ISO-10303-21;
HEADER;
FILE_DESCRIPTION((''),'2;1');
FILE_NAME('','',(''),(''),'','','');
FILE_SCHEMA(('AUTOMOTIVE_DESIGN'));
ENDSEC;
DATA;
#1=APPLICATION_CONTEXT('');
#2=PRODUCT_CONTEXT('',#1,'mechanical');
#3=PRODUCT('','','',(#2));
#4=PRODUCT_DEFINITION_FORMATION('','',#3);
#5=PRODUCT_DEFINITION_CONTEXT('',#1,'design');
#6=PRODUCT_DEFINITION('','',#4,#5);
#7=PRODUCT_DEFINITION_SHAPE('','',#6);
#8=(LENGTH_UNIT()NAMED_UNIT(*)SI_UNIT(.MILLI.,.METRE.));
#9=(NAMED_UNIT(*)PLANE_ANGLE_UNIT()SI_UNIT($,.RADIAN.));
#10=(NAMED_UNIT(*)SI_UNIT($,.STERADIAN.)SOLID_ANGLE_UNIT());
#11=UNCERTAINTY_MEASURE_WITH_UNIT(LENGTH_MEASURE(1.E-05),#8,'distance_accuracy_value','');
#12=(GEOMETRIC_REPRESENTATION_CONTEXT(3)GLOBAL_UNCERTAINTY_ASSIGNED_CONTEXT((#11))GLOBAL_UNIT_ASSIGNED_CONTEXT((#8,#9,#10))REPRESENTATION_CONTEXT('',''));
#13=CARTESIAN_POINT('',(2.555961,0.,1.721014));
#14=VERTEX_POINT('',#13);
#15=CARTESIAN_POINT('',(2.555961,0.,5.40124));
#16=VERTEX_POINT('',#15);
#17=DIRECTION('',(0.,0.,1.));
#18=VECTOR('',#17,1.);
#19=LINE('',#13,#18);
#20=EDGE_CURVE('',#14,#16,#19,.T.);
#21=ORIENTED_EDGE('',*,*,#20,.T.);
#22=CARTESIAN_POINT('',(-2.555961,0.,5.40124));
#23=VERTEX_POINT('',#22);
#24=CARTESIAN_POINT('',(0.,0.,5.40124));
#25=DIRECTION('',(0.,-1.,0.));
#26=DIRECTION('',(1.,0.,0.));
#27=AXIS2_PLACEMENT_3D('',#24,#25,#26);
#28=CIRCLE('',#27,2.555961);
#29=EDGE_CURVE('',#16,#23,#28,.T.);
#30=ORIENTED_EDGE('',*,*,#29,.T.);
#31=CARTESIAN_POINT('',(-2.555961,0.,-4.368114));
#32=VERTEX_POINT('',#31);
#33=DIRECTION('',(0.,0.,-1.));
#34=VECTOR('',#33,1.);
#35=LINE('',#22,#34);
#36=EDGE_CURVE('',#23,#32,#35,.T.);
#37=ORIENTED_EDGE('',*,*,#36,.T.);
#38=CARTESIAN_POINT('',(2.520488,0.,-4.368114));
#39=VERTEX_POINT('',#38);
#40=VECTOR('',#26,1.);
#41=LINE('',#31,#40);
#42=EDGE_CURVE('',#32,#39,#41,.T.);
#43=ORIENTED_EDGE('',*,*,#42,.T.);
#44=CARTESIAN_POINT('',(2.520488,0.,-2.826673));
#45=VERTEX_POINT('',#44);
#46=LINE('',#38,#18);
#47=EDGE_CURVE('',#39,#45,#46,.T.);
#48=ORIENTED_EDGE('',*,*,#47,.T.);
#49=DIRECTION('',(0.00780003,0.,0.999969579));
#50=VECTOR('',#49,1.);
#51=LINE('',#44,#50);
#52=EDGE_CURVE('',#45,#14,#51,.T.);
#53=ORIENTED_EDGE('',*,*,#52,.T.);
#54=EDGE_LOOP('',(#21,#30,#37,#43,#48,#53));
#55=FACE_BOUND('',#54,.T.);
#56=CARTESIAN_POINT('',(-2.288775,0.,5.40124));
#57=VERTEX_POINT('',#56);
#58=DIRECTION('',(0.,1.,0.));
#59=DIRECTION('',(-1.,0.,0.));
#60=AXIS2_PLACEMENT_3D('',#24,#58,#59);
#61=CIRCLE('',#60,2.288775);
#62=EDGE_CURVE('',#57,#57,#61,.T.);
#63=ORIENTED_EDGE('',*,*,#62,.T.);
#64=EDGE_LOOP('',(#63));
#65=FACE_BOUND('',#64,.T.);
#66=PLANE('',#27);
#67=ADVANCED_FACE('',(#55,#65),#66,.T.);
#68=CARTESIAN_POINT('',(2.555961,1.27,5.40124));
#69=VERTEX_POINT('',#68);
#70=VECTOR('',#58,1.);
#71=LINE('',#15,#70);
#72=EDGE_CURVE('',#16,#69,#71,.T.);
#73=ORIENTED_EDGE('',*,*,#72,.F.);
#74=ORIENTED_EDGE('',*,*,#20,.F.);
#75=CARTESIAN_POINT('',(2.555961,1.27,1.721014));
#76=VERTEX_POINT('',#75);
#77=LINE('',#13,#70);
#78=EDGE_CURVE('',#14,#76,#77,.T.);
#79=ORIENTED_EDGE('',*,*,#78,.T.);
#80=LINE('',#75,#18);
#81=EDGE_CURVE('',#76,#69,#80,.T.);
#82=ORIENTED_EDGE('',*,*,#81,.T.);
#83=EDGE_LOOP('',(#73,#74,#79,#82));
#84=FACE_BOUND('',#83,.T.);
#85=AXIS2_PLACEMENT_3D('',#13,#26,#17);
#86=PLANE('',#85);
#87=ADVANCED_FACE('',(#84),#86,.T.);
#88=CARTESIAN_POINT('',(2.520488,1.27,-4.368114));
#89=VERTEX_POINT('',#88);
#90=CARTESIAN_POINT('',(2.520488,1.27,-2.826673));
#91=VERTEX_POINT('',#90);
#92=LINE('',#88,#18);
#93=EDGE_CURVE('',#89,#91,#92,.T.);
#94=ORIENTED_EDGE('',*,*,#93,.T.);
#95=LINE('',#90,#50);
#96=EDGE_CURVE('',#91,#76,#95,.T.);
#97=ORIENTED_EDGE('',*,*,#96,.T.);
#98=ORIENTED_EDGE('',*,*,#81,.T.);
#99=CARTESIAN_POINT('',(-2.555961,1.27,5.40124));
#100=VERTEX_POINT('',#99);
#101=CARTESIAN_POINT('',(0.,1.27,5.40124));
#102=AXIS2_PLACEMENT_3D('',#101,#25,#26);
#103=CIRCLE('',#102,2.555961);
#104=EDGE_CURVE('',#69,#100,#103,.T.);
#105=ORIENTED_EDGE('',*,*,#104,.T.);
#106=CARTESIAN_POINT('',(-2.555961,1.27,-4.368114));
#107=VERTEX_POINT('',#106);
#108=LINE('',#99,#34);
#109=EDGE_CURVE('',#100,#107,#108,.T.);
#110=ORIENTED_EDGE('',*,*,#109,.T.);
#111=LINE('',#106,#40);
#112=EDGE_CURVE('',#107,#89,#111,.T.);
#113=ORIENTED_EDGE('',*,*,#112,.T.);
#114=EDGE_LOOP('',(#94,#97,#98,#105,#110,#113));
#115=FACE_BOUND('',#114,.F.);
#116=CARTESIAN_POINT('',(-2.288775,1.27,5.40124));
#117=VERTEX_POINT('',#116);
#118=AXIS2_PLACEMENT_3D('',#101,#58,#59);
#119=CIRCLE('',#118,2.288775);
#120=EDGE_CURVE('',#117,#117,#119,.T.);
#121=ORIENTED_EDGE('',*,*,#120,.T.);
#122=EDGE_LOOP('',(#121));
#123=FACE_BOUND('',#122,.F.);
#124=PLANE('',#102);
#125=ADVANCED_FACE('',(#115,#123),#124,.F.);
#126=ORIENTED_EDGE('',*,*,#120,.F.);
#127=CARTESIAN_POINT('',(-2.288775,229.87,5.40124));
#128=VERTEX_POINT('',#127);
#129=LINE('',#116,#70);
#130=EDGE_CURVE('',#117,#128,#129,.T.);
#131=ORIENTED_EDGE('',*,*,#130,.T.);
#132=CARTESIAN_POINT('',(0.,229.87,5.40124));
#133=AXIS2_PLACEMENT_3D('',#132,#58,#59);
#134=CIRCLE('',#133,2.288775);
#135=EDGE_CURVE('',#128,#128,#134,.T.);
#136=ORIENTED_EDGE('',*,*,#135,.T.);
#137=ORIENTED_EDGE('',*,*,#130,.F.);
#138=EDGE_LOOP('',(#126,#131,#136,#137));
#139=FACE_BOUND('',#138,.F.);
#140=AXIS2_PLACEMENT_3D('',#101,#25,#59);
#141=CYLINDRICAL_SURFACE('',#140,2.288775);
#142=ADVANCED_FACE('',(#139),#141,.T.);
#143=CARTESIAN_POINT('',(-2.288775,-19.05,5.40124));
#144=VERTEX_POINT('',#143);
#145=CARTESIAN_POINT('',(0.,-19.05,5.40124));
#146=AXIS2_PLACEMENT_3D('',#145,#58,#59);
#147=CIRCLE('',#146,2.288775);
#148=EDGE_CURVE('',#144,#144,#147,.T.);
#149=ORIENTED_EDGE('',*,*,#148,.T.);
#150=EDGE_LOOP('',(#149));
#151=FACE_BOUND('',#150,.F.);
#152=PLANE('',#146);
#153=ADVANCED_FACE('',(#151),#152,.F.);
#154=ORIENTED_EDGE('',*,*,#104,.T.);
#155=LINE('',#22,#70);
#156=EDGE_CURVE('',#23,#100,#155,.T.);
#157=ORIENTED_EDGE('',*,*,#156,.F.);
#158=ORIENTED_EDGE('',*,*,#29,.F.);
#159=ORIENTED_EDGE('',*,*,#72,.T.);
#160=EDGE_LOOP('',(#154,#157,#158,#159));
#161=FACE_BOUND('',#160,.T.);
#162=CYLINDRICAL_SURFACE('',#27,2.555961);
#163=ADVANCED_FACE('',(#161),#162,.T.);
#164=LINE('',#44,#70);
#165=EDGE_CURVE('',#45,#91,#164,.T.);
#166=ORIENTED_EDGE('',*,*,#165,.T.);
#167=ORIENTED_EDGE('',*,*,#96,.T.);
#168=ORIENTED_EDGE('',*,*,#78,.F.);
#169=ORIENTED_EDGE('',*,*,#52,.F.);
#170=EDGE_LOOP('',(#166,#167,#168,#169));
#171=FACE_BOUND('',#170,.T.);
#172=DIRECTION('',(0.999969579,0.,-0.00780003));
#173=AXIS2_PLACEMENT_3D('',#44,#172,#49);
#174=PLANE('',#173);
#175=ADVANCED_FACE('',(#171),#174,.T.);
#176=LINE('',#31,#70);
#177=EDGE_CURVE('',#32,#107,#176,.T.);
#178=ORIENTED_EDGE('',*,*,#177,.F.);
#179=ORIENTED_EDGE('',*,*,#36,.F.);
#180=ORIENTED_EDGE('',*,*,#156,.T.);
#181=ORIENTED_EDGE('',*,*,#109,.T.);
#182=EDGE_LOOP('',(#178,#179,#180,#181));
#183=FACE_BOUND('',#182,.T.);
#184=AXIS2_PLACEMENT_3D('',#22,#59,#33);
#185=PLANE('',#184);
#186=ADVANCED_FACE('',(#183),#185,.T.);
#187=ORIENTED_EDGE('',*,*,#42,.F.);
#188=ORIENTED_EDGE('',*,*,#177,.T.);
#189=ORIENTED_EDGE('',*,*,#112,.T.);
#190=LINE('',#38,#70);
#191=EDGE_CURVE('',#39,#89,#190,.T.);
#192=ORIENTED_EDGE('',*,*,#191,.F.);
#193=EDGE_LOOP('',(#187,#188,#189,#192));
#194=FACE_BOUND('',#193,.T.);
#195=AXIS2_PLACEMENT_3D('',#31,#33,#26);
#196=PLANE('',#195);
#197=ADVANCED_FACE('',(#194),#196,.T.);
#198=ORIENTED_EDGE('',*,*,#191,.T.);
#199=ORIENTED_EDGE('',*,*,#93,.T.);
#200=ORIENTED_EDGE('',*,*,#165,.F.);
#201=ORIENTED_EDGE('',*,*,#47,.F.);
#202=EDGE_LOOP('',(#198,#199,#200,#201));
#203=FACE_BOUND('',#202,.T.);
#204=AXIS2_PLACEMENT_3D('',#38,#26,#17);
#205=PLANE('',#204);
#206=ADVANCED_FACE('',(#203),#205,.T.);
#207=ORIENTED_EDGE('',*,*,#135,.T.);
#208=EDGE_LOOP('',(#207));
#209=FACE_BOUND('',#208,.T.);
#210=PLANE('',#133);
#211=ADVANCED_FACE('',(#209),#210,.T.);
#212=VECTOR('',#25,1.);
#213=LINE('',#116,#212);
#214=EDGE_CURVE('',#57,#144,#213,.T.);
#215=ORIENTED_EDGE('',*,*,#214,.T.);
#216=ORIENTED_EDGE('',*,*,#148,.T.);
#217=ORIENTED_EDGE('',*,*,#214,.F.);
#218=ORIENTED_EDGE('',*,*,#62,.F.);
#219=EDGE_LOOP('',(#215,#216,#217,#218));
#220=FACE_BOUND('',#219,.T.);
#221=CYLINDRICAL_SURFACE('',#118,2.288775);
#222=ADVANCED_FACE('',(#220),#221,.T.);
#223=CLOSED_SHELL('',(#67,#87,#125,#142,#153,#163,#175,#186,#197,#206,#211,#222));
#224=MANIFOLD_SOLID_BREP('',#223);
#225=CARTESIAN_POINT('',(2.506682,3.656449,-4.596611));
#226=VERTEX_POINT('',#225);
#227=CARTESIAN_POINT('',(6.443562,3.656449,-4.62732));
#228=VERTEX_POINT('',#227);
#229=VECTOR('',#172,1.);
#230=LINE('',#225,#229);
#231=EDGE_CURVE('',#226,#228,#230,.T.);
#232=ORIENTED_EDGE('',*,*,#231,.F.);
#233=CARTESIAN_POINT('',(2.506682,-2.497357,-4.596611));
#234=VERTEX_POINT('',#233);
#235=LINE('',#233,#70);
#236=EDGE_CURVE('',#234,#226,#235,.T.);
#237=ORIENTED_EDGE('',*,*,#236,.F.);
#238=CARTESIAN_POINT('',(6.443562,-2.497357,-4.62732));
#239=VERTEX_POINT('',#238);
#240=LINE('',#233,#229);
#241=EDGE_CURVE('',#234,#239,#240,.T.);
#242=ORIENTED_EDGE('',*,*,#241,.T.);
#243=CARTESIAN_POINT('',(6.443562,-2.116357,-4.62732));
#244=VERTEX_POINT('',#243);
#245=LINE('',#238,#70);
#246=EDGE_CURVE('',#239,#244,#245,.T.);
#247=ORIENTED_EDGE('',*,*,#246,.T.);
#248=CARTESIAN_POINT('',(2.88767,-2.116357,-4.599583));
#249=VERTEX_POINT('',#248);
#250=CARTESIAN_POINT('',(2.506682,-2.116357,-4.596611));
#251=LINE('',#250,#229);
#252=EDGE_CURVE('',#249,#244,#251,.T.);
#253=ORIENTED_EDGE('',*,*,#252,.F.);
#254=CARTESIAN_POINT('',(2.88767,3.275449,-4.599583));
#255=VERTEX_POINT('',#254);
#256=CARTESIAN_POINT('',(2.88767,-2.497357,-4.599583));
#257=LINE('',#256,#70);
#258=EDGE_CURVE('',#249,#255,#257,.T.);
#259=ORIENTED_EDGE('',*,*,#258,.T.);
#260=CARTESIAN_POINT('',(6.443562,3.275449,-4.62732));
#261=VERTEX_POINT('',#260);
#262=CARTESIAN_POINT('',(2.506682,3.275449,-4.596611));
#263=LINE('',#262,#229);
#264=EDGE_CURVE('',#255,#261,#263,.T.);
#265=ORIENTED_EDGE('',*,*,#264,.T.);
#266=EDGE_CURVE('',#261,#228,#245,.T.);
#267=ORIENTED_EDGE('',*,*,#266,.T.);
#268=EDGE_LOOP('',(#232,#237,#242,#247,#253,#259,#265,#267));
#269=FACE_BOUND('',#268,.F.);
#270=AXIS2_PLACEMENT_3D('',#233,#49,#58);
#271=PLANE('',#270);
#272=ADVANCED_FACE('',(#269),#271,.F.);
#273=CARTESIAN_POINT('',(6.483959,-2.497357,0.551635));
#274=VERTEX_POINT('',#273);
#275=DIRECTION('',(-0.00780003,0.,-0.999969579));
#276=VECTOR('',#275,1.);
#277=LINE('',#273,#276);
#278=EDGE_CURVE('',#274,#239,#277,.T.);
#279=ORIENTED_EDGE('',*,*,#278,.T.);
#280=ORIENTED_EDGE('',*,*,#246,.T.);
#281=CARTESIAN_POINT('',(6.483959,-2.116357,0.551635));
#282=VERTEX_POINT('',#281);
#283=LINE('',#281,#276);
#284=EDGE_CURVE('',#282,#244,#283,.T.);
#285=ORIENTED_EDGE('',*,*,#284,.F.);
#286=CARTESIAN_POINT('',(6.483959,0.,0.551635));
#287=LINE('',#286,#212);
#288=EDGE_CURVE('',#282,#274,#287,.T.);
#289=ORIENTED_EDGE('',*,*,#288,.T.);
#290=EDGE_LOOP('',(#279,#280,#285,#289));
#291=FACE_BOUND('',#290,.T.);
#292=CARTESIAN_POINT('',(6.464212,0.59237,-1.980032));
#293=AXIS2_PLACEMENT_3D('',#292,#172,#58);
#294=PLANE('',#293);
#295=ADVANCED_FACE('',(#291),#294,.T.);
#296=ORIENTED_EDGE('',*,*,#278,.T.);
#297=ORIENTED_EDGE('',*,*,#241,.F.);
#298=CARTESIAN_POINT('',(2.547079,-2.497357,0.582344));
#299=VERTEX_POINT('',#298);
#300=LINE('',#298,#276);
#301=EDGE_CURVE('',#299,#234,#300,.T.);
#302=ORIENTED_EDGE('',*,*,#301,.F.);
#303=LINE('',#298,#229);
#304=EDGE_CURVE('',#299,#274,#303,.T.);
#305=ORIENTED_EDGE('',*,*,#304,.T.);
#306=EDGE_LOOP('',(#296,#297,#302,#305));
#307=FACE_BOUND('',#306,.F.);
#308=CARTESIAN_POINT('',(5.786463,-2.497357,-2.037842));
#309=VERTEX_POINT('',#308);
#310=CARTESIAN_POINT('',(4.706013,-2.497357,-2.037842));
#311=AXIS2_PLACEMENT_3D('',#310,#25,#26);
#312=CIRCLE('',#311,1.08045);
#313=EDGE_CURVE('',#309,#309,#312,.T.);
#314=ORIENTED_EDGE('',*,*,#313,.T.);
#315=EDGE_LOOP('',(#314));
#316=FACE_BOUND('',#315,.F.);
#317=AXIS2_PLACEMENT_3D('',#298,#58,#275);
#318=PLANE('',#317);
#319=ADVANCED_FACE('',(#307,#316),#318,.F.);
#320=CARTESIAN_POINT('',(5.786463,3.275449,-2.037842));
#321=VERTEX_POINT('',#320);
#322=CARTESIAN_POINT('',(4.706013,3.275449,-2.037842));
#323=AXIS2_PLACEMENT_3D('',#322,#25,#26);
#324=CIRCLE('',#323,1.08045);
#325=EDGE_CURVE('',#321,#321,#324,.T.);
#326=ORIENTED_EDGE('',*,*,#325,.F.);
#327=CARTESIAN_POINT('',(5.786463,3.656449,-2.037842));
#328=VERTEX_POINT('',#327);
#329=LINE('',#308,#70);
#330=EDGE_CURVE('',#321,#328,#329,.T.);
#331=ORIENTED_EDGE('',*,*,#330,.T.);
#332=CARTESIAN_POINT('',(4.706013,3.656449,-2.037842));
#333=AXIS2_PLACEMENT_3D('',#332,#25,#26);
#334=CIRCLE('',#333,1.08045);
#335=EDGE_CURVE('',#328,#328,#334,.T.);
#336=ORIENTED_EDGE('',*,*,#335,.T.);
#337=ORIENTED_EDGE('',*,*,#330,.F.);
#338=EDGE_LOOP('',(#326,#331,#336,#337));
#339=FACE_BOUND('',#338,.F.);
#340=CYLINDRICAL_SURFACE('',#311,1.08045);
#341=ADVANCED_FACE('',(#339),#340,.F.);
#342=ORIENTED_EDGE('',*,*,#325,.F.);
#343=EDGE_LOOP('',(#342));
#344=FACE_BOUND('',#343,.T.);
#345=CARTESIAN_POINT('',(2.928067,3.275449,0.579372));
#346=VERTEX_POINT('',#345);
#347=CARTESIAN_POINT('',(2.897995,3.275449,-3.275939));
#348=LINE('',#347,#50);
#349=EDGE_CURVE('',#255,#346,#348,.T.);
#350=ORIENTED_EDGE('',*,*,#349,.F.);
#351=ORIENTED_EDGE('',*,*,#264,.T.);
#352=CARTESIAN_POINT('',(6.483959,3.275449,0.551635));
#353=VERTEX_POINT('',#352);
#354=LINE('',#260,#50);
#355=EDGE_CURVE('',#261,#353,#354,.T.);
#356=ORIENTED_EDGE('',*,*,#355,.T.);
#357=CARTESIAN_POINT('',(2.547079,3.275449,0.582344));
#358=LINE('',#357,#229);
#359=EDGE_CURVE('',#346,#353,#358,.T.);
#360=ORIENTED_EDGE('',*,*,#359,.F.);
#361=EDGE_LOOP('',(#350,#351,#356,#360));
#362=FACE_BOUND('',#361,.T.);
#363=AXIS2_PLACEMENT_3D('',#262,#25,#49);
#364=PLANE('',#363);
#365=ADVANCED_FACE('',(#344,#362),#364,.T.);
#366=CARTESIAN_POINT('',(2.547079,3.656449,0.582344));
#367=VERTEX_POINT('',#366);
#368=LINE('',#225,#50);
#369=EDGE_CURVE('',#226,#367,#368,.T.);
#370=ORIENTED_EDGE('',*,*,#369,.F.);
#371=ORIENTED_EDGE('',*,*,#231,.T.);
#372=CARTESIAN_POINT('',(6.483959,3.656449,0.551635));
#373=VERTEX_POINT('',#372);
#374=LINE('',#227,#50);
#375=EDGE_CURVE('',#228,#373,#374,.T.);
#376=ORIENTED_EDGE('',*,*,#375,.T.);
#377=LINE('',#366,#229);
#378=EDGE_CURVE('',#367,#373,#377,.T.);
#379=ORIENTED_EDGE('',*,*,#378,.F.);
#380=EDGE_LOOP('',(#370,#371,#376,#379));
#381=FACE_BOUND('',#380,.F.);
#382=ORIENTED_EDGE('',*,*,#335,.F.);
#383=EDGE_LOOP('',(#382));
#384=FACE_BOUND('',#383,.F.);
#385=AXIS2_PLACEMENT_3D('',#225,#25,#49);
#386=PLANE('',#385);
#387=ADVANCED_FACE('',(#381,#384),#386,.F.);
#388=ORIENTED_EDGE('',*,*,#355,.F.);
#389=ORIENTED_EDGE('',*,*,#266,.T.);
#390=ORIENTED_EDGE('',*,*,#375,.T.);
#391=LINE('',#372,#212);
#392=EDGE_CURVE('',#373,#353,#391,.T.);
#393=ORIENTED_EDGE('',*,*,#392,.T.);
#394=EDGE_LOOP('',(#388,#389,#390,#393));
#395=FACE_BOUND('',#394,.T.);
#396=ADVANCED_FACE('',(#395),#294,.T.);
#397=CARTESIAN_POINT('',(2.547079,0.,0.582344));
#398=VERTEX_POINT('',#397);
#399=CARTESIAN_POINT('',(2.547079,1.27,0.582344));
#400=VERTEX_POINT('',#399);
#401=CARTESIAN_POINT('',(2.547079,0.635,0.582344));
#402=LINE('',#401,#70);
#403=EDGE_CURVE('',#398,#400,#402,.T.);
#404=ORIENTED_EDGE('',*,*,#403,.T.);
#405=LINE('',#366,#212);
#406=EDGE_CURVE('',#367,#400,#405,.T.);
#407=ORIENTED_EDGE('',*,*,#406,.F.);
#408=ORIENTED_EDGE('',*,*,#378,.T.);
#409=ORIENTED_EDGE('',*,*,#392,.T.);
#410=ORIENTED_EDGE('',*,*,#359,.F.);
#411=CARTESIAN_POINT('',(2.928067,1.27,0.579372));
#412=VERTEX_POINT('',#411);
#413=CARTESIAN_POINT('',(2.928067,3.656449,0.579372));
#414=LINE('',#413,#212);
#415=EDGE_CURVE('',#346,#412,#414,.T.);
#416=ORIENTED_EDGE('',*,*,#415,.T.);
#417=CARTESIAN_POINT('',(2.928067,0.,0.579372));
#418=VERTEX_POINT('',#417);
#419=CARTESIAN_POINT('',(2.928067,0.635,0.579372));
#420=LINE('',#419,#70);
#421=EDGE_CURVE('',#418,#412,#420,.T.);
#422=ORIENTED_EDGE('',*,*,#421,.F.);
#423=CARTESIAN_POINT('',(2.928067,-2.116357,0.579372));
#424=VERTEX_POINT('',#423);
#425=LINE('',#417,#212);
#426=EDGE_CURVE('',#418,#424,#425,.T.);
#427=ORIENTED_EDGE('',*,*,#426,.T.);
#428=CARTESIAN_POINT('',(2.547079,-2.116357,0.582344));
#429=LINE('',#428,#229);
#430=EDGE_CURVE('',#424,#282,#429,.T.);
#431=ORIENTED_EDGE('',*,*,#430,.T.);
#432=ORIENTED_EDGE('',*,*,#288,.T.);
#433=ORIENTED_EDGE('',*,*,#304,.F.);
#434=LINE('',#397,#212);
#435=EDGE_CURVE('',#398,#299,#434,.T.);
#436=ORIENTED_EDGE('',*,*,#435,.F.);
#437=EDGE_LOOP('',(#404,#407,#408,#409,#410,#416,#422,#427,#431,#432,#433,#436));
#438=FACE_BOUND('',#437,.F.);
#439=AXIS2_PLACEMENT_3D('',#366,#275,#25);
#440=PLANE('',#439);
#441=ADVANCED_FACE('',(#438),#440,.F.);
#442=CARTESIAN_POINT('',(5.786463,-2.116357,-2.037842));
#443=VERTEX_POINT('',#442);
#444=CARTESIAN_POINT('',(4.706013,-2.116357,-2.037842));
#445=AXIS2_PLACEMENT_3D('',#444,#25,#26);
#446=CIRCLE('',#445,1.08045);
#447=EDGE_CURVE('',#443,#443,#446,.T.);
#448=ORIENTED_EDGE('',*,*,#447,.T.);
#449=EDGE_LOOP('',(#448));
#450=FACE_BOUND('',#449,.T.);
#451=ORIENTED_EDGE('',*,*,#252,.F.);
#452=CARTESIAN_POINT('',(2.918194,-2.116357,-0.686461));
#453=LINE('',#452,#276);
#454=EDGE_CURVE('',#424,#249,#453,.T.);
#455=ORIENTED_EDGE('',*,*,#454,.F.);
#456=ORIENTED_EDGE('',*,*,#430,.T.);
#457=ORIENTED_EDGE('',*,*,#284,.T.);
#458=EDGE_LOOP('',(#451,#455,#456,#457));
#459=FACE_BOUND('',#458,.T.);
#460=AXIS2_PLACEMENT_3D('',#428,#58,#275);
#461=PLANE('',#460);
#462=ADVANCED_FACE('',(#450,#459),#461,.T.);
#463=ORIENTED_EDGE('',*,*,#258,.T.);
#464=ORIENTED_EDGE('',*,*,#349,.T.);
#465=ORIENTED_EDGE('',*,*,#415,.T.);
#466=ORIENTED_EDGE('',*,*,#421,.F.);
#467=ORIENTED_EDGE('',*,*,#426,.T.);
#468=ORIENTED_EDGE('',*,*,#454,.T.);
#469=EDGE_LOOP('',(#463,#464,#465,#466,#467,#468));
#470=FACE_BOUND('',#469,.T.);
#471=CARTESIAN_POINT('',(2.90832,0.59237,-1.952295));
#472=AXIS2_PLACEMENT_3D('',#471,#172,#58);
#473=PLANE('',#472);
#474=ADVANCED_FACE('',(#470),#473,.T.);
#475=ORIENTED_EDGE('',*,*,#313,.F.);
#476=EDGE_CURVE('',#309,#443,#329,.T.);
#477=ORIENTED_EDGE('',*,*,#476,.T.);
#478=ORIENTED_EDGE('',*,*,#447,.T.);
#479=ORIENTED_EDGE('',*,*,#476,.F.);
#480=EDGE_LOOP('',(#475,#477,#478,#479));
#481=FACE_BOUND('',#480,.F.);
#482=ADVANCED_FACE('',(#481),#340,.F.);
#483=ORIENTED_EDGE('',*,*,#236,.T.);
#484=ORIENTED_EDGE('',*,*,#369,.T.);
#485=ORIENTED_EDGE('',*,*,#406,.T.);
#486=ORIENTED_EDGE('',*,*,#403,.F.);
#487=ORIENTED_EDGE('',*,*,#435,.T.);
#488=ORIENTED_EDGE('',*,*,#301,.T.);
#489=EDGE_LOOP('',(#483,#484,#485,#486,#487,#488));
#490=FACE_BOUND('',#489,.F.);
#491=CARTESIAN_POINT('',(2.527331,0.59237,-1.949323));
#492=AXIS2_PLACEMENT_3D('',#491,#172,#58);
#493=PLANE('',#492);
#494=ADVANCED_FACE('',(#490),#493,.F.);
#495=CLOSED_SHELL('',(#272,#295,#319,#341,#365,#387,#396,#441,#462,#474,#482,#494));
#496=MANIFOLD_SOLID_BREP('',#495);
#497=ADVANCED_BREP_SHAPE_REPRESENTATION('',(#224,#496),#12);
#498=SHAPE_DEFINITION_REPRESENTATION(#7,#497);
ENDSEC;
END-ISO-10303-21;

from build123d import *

# Parameters (mm, degrees)
F1_DEPTH      = 1.27
F2_R          = 2.2887754184
F3_DEPTH      = 228.6
F3_DEPTH_BACK = 20.32
F4_W          = 1.27
F4_H          = 3.4091206923
F5_DEPTH      = 3.937
F6_T          = -0.381
F7_R          = 1.080450049
F8_DEPTH      = 11.176


# Not quite as in the source:
# - a feature names something its author has since deleted; it is built from what else it names


with BuildPart() as f1:
    # F0 (on Front) → F1 (new body)
    with BuildSketch(Plane.XZ):
        with BuildLine():
            ThreePointArc((-2.5559609307, 5.4012401961), (0, 2.8452792654), (2.5559609307, 5.4012401961))
            ThreePointArc((2.5559609307, 5.4012401961), (0, 7.9572011268), (-2.5559609307, 5.4012401961))
        make_face()
        with BuildLine():
            Line((2.5559609307, 1.721014436), (2.5559609307, 5.4012401961))
            ThreePointArc((2.5559609307, 5.4012401961), (0, 2.8452792654), (-2.5559609307, 5.4012401961))
            Line((-2.5559609307, 5.4012401961), (-2.5559609307, 4.3758706689))
            Line((-2.5559609307, 4.3758706689), (-2.5559609307, -2.8266729787))
            Line((-2.5559609307, -2.8266729787), (-2.5559609307, -4.3681138195))
            Line((-2.5559609307, -4.3681138195), (2.5204877513, -4.3681138195))
            Line((2.5204877513, -4.3681138195), (2.5204877513, -2.8266729787))
            Line((2.5204877513, -2.8266729787), (2.5559609307, 1.721014436))
        make_face()
    extrude(amount=-F1_DEPTH)

    # F2 (on face) → F3 (join, two sides)
    with BuildSketch(Plane(origin=(0, 1.27, 0), x_dir=(-1, 0, 0), z_dir=(0, 1, 0))) as f3_sk:
        with Locations((0, 5.4012401961)):
            Circle(F2_R)
    extrude(amount=F3_DEPTH)
    extrude(f3_sk.sketch, amount=-F3_DEPTH_BACK)


with BuildPart() as f5:
    # F4 (on face) → F5 (new body)
    with BuildSketch(Plane(origin=(2.5423818682, 0, -0.0198312593), x_dir=(0, 1, 0), z_dir=(0.9999695793, 0, -0.0078000304))):
        Polygon((-2.497356755, -4.576918826), (3.6564493494, -4.576918826), (3.6564493494, 0.6021935842), (1.27, 0.6021935842), (1.27, -2.8069271081), (0, -2.8069271081), (0, 0.6021935842), (-2.497356755, 0.6021935842), align=None)
        with Locations((0.635, -1.102366762)):
            Rectangle(F4_W, F4_H)
    extrude(amount=F5_DEPTH)

    # F6
    f6_openings = [f5.faces().sort_by_distance(p)[0] for p in [
        (6.463761, 0.579546, -2.037842),
        (4.515519, 0.579546, 0.56699),
        (4.475122, 0.579546, -4.611965),
    ]]
    offset(amount=F6_T, openings=f6_openings)

    # F7 (on face) → F8 (cut)
    with BuildSketch(Plane.XZ.offset(2.497356755)):
        with Locations((4.7060133182, -2.0378421431)):
            Circle(F7_R)
    extrude(amount=-F8_DEPTH, mode=Mode.SUBTRACT)


solid = Compound([f1.part, f5.part])
